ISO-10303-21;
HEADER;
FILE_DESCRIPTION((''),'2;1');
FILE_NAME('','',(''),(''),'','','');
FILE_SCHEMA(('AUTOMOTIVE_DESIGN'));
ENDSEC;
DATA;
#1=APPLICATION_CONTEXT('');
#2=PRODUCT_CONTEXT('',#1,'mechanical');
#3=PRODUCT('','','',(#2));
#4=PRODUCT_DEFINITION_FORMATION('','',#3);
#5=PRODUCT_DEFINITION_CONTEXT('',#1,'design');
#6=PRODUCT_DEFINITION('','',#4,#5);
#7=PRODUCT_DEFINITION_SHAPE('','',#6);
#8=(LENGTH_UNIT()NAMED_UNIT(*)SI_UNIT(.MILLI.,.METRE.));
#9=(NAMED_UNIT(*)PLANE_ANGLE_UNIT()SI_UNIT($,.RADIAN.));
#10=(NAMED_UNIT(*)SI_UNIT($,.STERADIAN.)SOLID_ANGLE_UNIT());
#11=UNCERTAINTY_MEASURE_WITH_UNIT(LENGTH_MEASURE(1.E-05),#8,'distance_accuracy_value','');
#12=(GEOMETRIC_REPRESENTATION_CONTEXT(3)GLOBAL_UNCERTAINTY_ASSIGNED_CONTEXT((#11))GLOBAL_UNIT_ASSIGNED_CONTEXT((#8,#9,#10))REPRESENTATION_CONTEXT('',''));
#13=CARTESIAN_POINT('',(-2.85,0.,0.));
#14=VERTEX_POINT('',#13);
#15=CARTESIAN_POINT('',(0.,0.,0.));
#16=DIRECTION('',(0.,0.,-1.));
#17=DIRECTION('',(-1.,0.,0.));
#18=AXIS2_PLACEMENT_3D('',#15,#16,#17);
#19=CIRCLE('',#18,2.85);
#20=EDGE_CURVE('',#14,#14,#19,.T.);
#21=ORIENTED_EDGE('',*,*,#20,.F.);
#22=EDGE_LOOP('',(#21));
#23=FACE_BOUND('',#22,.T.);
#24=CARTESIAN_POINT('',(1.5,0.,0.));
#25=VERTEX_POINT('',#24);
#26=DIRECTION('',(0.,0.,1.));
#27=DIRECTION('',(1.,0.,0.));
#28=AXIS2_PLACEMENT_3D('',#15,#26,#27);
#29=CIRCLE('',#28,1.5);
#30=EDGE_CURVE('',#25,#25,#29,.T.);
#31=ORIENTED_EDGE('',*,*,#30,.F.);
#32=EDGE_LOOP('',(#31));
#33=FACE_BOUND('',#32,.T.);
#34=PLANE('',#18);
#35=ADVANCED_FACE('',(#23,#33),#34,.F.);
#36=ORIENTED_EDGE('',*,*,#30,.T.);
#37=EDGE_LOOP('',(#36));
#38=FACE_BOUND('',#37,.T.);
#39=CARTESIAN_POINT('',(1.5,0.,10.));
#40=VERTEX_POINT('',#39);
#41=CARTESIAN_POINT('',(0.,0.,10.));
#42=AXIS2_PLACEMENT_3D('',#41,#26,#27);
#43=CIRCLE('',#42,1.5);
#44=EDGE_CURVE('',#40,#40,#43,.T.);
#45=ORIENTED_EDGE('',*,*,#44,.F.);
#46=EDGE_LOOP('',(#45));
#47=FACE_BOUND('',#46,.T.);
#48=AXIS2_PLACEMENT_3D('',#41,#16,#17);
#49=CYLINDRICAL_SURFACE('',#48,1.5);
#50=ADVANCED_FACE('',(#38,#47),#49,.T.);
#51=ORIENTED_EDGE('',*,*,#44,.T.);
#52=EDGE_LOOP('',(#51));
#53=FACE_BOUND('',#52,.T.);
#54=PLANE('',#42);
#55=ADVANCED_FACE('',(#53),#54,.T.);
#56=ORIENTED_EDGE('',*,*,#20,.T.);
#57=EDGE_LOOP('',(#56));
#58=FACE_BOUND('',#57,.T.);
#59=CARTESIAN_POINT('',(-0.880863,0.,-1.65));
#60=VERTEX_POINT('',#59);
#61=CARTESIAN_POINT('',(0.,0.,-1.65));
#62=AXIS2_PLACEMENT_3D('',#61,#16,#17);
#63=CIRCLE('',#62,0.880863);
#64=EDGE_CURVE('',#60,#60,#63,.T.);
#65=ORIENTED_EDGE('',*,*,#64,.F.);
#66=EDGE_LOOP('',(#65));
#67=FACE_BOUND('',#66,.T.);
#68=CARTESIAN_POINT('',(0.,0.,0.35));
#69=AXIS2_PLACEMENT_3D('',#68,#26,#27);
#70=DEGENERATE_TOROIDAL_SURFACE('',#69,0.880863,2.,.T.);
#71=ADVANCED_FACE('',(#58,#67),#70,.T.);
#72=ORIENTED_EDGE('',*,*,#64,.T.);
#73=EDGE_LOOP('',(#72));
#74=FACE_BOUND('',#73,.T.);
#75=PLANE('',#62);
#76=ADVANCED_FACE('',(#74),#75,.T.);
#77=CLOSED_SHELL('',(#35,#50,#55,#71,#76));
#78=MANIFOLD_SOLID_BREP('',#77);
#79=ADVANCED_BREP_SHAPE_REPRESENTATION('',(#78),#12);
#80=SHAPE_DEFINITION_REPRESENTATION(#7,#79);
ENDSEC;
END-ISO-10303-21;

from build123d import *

# Parameters (mm, degrees)
SKETCH_1_R      = 1.5
EXTRUDE_1_DEPTH = 10
SKETCH_2_R      = 2.85
EXTRUDE_2_DEPTH = 1.65
FILLET_1_R      = 2


with BuildPart() as part:
    # 草图1 → 凸台-拉伸1 (new body)
    with BuildSketch(Plane.XY):
        Circle(SKETCH_1_R)
    extrude(amount=EXTRUDE_1_DEPTH)

    # 草图2 → 凸台-拉伸2 (add)
    with BuildSketch(Plane(origin=(0, 0, 0), x_dir=(-1, 0, 0), z_dir=(0, 0, -1))):
        Circle(SKETCH_2_R)
    extrude(amount=EXTRUDE_2_DEPTH)

    # 圆角1
    # the kernel refuses this fillet: 2 mm, written as the material it takes off along each edge
    with BuildSketch(Plane(origin=(0, 0, -1.65), x_dir=(-1, 0, 0), z_dir=(0, -1, 0))) as fillet_1_piece_1:
        with BuildLine():
            CenterArc((0.880863133, -2), FILLET_1_R, 10.078658108, 79.921341892)
            Line((0.880863133, 0), (0.880863133, 0.04))
            Line((0.880863133, 0.04), (2.85, 0.04))
            Line((2.85, 0.04), (2.89, 0))
            ThreePointArc((2.89, 0), (2.89, -0.825), (2.889382737, -1.643))
            Line((2.889382737, -1.643), (2.85, -1.65))
        make_face()
    revolve(axis=Axis((0, 0, -1.65), (0, 0, -1)), mode=Mode.SUBTRACT)


solid = part.part
